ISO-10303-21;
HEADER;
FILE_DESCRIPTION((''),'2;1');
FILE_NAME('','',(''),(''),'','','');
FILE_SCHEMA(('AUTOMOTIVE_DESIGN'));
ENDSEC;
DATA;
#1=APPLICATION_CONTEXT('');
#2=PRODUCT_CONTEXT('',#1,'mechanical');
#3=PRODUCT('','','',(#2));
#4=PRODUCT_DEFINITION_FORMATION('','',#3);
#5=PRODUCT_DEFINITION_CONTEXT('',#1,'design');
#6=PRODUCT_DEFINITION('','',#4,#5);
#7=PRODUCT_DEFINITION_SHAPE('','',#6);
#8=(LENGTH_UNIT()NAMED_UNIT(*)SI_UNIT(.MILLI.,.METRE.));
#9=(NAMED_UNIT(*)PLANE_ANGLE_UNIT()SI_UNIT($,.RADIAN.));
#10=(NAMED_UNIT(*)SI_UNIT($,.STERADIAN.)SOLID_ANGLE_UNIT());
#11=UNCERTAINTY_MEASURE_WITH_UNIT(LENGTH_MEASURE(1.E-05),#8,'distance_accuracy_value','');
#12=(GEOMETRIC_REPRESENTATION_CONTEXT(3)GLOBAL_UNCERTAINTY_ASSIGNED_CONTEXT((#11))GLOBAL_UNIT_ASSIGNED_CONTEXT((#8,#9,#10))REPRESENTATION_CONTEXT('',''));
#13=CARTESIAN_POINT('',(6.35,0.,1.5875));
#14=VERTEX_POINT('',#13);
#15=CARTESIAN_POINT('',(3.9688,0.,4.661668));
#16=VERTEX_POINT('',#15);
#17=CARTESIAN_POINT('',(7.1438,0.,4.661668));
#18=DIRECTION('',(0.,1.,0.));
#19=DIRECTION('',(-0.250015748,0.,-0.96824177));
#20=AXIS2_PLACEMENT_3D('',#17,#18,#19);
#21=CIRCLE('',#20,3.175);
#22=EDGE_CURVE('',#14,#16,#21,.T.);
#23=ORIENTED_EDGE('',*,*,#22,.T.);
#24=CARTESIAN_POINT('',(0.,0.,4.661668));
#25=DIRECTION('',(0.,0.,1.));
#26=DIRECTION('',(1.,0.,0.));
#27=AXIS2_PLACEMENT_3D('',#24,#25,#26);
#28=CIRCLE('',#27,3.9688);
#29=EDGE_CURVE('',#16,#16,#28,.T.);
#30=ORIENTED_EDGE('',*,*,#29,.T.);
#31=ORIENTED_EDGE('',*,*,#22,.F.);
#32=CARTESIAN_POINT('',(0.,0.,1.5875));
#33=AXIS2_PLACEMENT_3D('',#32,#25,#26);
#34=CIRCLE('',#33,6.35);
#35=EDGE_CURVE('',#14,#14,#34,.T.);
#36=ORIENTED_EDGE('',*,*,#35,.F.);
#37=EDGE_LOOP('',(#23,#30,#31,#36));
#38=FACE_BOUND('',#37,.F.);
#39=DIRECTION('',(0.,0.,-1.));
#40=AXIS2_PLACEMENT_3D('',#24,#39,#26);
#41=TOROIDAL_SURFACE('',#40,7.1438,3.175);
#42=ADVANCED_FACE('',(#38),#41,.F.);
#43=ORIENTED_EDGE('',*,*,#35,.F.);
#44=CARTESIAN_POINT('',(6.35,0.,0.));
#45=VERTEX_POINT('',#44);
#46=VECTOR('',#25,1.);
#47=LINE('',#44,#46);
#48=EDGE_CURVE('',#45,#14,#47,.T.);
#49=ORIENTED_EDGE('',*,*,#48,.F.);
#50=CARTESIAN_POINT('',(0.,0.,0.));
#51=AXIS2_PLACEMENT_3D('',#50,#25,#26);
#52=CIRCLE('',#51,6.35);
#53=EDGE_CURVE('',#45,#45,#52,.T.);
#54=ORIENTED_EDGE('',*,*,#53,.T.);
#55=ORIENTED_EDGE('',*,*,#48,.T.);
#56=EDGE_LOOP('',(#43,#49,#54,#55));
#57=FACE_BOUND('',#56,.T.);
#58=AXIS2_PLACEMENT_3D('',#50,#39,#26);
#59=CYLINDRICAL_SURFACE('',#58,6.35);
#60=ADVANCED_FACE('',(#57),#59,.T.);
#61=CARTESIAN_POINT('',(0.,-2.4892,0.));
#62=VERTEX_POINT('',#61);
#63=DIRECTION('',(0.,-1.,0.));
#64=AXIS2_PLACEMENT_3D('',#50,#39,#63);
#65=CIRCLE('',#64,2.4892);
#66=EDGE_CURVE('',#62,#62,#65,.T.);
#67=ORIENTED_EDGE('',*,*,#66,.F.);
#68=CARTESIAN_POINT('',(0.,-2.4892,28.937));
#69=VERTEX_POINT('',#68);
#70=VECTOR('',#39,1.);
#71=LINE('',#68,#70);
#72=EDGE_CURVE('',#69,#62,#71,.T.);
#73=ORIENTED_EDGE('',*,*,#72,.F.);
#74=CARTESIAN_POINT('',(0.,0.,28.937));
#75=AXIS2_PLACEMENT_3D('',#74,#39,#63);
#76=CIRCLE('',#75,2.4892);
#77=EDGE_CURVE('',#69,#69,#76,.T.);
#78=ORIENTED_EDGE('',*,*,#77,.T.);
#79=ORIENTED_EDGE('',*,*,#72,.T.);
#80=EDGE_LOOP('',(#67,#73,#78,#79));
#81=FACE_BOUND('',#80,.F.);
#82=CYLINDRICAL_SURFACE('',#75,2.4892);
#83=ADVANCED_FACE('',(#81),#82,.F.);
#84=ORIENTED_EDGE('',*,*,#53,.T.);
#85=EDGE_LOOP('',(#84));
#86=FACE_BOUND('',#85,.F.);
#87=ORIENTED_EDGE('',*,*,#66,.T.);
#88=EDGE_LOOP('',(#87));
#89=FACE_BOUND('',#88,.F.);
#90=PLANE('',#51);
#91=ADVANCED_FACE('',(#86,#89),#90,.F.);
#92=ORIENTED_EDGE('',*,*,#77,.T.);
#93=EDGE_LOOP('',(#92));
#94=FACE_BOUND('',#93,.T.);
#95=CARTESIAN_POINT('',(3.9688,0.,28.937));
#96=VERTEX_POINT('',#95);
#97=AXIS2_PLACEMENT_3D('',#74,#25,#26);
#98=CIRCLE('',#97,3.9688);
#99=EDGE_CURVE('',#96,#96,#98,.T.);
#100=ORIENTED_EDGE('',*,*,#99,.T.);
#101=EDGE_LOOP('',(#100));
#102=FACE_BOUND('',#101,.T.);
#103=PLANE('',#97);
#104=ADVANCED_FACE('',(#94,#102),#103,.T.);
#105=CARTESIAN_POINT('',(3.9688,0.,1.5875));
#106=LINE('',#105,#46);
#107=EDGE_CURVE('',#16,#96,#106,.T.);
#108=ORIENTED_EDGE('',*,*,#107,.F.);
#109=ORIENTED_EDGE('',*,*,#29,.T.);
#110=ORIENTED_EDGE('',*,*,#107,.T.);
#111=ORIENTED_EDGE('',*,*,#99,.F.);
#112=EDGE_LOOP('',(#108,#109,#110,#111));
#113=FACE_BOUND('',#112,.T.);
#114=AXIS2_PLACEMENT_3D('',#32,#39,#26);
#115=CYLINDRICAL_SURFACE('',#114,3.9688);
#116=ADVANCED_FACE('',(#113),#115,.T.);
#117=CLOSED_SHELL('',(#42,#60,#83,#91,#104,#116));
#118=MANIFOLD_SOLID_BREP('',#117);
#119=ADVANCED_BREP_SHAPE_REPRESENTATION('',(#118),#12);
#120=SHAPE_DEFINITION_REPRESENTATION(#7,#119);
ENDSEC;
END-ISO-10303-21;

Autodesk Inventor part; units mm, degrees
ref_plane "YZ Plane" through (0, 0, 0) normal (1, 0, 0) x (0, 1, 0)
ref_plane "XZ Plane" through (0, 0, 0) normal (0, 1, 0) x (-1, 0, 0)
ref_plane "XY Plane" through (0, 0, 0) normal (0, 0, 1) x (1, 0, 0)
sketch "Sketch1" plane through (0, 0, 0) normal (0, 0, 1) x (1, 0, 0)
  circle A0 centre (0, 0) radius 6.35
  dimension "d0" = 12.7
extrude "Extrusion1" add sketch "Sketch1" along normal blind 1.5875
sketch "Sketch2" plane through (0, 0, 1.5875) normal (0, 0, 1) x (1, 0, 0)
  circle A0 centre (0, 0) radius 6.35 projected
  circle A1 centre (0, 0) radius 3.9688
  dimension "d3" = 7.9375
extrude "Extrusion2" add sketch "Sketch2" along normal blind 27.3495 contours A1
fillet "Fillet1" radius 3.175 1 edges at (-3.9688, 0, 1.5875)
sketch "Sketch3" plane through (0, 0, 28.937) normal (0, 0, 1) x (1, 0, 0)
  circle A0 centre (0, 0) radius 3.9687 projected
hole "Hole1" at (0, 0, 28.937) direction (0, 0, -1) diameter 4.9784 end through all clearance for "Flat Head Machine Screw (82)" size "#10" standard "Ansi Unified Screw Threads"
properties part number "Pneumatic Standoff Curved" material "Aluminum 6061"
